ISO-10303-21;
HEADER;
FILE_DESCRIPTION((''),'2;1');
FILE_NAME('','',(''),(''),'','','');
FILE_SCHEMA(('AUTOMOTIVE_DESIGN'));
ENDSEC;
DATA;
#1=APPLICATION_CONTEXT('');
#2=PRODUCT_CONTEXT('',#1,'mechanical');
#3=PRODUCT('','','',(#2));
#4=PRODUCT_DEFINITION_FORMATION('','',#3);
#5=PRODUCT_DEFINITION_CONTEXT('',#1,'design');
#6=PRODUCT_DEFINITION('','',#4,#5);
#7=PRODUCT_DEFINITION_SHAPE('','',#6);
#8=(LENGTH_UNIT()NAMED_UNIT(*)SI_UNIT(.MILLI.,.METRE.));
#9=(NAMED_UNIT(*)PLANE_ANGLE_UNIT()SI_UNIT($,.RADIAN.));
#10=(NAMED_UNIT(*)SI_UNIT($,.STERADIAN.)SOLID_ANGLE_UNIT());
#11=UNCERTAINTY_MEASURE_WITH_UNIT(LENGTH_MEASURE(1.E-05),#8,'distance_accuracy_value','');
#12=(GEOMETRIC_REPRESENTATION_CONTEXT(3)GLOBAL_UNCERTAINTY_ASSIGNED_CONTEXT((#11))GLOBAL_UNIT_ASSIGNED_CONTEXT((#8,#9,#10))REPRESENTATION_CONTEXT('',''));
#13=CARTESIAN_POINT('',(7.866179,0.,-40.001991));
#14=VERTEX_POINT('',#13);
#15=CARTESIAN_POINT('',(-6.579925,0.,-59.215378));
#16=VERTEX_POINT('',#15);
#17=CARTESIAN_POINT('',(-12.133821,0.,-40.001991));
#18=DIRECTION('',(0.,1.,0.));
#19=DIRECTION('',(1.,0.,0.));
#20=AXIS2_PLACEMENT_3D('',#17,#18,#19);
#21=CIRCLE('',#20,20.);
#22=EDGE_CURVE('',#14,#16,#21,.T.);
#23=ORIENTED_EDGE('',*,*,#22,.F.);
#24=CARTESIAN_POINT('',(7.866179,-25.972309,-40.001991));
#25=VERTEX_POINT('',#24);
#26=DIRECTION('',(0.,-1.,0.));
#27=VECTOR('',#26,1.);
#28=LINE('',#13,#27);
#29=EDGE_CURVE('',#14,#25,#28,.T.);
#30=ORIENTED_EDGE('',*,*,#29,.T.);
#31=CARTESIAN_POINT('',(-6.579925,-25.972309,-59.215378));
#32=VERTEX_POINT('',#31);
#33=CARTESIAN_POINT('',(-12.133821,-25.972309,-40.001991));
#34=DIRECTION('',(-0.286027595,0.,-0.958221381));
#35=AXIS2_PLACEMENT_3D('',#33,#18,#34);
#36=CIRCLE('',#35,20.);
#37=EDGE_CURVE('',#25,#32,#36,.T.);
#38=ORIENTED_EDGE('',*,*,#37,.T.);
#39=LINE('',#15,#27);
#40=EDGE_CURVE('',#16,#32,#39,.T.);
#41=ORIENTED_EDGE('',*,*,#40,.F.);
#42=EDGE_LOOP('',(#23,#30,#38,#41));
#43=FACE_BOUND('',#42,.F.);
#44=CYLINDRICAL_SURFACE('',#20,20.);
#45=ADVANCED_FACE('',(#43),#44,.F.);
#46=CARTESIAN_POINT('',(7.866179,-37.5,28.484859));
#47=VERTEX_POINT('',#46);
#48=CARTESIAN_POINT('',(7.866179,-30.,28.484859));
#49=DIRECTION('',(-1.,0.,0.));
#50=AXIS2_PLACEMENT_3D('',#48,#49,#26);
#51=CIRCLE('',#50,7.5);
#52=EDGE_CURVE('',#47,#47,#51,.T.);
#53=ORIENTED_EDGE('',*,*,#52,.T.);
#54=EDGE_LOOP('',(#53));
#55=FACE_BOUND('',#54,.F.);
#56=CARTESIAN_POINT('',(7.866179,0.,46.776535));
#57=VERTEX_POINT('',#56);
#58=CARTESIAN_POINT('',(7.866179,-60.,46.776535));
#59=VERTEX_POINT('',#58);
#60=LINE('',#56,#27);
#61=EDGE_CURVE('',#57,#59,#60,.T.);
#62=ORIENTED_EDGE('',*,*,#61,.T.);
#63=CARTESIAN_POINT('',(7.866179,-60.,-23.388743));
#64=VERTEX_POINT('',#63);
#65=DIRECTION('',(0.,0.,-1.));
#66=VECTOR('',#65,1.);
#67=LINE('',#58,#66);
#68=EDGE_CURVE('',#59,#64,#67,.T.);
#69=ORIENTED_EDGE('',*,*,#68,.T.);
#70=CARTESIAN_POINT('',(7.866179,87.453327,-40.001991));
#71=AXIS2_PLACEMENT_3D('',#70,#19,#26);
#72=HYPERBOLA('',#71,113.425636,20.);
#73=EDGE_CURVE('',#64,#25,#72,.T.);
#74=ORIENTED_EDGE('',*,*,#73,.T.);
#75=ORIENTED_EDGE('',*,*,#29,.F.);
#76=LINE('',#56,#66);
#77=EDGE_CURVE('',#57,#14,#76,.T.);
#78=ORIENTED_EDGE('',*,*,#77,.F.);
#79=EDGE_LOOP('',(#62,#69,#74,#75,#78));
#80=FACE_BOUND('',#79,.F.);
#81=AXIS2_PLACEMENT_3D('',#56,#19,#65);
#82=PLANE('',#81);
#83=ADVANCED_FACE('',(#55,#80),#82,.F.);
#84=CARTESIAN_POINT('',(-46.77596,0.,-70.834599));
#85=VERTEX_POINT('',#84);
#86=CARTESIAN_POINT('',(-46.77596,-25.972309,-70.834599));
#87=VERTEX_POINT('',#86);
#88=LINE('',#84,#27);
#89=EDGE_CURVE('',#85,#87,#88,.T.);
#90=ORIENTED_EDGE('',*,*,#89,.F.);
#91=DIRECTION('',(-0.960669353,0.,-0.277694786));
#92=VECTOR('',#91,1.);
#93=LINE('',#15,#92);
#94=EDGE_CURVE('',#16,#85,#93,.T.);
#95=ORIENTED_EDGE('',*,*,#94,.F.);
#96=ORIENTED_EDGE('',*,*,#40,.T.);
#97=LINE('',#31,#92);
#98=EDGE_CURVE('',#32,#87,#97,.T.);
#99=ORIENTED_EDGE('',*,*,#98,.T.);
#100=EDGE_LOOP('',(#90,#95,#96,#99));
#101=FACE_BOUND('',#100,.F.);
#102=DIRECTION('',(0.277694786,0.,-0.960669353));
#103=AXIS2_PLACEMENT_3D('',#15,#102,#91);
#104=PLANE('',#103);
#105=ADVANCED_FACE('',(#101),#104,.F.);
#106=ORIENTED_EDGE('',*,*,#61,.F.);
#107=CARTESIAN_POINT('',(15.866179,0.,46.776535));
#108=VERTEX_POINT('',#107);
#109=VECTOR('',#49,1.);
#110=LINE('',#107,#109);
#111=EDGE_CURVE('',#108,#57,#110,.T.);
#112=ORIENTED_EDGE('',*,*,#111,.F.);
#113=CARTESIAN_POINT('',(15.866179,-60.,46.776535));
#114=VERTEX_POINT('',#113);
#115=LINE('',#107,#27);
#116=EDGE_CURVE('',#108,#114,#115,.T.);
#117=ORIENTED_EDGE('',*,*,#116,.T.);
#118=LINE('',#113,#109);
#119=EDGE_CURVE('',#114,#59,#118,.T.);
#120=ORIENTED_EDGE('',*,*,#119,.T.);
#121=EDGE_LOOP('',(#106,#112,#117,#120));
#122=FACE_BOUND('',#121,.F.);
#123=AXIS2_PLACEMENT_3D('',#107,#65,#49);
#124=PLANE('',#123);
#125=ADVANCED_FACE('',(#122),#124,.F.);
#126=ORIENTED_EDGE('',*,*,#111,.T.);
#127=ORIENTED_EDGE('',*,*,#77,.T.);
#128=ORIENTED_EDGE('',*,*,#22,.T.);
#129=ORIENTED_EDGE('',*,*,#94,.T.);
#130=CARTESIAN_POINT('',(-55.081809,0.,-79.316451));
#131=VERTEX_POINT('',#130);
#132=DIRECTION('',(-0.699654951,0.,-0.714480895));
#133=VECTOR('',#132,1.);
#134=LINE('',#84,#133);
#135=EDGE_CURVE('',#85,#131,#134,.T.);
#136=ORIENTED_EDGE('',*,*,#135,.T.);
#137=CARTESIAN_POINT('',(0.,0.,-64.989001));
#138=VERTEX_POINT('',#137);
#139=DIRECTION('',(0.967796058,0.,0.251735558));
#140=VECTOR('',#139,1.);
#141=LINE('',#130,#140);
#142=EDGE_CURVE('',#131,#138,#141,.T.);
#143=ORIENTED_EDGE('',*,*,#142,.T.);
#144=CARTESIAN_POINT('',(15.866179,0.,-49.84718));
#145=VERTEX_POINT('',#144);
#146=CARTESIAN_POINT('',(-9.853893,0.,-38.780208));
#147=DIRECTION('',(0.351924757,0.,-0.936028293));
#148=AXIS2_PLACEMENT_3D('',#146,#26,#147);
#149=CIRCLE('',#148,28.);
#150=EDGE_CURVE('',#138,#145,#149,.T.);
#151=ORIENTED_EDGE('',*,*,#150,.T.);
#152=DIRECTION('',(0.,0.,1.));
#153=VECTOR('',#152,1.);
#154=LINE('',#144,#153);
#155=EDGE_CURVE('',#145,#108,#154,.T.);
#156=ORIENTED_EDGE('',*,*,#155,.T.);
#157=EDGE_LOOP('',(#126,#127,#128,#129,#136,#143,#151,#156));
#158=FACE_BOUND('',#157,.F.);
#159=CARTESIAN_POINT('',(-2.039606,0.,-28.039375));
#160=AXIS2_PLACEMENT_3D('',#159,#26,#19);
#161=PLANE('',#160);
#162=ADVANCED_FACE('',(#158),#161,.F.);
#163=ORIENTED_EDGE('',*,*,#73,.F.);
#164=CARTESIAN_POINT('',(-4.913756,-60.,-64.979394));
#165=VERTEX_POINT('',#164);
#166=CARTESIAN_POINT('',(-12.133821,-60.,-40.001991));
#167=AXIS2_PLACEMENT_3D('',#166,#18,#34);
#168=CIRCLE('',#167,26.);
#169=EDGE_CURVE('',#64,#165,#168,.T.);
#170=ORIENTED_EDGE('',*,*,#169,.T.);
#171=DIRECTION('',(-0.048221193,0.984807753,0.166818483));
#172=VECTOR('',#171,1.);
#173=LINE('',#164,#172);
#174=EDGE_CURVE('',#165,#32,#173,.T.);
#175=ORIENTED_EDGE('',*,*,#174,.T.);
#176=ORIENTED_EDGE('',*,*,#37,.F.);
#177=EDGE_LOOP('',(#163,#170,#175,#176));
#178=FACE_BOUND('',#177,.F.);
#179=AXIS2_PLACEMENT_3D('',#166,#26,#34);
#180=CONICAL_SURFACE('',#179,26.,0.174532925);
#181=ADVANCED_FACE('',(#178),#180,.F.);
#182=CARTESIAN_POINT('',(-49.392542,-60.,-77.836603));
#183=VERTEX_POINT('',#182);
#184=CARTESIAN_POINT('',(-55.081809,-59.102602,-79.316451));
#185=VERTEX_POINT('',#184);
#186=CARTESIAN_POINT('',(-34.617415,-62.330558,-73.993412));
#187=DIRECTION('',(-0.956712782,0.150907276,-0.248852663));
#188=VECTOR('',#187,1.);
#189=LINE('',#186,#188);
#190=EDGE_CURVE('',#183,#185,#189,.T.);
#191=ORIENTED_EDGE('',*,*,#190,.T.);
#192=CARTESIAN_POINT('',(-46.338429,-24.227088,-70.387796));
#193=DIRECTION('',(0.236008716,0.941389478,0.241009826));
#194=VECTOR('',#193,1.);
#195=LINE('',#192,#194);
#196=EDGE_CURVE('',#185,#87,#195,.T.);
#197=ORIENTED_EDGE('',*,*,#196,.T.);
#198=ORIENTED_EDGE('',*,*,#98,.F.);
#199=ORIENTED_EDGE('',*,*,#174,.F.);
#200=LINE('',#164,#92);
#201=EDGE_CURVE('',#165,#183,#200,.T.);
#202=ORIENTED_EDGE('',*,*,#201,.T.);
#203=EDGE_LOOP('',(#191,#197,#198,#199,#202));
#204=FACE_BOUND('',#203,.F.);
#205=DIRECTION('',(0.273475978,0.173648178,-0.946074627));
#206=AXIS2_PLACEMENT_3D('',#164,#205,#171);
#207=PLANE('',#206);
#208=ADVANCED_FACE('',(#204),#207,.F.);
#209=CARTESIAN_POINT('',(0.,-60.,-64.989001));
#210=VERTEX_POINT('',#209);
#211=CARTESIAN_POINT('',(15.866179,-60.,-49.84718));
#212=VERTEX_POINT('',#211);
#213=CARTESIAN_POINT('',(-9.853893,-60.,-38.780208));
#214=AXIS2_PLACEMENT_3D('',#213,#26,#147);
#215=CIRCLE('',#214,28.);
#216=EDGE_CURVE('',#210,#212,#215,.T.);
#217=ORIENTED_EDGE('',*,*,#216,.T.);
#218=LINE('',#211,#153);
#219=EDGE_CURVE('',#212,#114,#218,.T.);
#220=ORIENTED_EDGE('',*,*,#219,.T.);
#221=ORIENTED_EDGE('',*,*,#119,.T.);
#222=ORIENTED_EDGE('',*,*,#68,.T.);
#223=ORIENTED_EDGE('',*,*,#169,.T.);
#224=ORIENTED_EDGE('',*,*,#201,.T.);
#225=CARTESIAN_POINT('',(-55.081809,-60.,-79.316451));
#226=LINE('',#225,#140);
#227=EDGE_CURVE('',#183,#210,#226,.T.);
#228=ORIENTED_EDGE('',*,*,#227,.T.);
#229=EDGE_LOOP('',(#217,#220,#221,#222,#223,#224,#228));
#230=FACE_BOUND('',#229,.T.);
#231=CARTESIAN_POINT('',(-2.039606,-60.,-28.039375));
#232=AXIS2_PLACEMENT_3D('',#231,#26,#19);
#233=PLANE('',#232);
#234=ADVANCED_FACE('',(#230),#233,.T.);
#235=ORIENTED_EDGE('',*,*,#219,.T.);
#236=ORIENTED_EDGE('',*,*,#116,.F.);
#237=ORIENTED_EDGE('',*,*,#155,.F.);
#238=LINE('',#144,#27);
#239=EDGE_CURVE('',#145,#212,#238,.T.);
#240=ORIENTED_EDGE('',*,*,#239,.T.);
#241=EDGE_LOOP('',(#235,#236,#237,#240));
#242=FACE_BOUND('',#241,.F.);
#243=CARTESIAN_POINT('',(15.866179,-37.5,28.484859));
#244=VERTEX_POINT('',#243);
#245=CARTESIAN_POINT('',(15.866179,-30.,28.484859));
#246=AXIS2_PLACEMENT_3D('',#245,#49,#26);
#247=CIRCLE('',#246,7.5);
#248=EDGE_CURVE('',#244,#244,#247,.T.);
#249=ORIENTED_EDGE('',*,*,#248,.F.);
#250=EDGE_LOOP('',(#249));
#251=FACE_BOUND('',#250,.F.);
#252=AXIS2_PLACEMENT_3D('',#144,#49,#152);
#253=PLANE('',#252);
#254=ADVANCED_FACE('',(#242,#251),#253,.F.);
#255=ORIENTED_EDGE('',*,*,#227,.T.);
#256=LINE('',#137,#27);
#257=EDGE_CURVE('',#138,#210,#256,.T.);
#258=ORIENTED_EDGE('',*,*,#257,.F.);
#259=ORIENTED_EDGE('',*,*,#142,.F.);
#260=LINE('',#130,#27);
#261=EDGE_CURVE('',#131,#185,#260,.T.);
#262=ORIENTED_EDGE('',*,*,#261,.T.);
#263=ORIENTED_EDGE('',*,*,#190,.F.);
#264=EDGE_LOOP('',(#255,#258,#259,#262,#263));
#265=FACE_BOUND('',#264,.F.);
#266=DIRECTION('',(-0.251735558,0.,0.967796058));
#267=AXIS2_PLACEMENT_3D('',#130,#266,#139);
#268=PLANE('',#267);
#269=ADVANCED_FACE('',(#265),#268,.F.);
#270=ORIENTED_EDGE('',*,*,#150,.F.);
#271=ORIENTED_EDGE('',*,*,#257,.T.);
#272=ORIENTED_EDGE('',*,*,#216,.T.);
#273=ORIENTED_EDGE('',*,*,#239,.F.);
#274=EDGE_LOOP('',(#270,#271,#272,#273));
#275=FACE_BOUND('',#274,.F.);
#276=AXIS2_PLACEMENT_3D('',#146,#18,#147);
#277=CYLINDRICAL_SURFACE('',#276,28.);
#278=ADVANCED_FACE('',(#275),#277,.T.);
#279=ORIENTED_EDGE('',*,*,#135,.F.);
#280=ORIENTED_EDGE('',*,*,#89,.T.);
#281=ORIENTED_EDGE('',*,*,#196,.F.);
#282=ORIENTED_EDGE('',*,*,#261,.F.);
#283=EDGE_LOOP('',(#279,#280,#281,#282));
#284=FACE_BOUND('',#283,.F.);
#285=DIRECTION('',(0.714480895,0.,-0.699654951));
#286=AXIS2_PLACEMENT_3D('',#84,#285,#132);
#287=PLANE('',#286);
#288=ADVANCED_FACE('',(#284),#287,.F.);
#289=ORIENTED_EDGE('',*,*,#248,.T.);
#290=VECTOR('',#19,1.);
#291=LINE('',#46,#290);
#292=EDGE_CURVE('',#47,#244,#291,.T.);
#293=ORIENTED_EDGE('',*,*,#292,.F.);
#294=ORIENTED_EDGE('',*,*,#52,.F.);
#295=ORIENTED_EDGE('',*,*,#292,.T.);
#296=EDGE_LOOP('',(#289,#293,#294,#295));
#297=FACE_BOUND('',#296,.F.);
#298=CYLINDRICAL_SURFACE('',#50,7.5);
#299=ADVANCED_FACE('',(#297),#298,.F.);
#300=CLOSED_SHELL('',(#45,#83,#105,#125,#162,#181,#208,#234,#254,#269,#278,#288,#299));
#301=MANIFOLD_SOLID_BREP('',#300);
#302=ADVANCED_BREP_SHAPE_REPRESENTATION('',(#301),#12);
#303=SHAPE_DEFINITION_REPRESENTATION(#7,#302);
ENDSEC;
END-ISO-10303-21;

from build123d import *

# Parameters (mm, degrees)
F1_DEPTH    = 60
F2_T1_DEPTH = 130.2639714598
F2_T4_ANGLE = 327.2570469478
F3_R        = 7.5
F4_DEPTH    = 25


# Not quite as in the source:
# - a fillet or chamfer that OpenCascade refuses, or shapes differently, is made with other operations: its cross-section is extruded or revolved along the edge and cut away or added


with BuildPart() as f1:
    # F0 (on Front) → F1 (new body)
    with BuildSketch(Plane.XZ):
        with BuildLine():
            Line((15.8661792875, 46.7765345339), (7.8661792875, 46.7765345339))
            Line((7.8661792875, 46.7765345339), (7.8661792875, -40.0019907292))
            ThreePointArc((7.8661792875, -40.0019907292), (3.8517652045, -52.021185498), (-6.5799250014, -59.2153777921))
            Line((-6.5799250014, -59.2153777921), (-46.7759604719, -70.834598717))
            Line((-46.7759604719, -70.834598717), (-55.08180854, -79.3164507385))
            Line((-55.08180854, -79.3164507385), (0, -64.9890005589))
            ThreePointArc((0, -64.9890005589), (9.4773105279, -59.0361843334), (15.8661792875, -49.8471804794))
            Line((15.8661792875, -49.8471804794), (15.8661792875, -40.0019907292))
            Line((15.8661792875, -40.0019907292), (15.8661792875, 46.7765345339))
        make_face()
    extrude(amount=F1_DEPTH)

    # F2: chamfer of 6 x 34.0276909177 on 2 edges, made by hand

    # F2_s2 → F2_t1 (cut)
    with BuildSketch(Plane(origin=(-21.8695743552, 0, -6.3217034464), x_dir=(0, 1, 0), z_dir=(-0.9606693531, 0, -0.2776947856))):
        Polygon((-60, 61.0591878178), (-25.9723090823, 55.0591878178), (-60, 55.0591878178), align=None)
    extrude(amount=F2_T1_DEPTH, mode=Mode.SUBTRACT)

    # F2_s3 → F2_t4 (revolve, cut)
    with BuildSketch(Plane(origin=(-0.1774752696, 0, 0.0529760926), x_dir=(0, 1, 0), z_dir=(0.9582213809, 0, -0.2860275953))):
        Polygon((-60, -67.8013703537), (-25.9723090823, -61.8013703537), (-60, -61.8013703537), align=None)
    revolve(axis=Axis((-12.1338207125, -60, -40.0019907292), (0, 1, 0)), revolution_arc=F2_T4_ANGLE, mode=Mode.SUBTRACT)

    # F3 (on face) → F4 (cut)
    with BuildSketch(Plane(origin=(7.8661792875, 0, 0), x_dir=(0, -1, 0), z_dir=(-1, 0, 0))):
        with Locations((30, 28.4848585725)):
            Circle(F3_R)
    extrude(amount=-F4_DEPTH, mode=Mode.SUBTRACT)


solid = f1.part
